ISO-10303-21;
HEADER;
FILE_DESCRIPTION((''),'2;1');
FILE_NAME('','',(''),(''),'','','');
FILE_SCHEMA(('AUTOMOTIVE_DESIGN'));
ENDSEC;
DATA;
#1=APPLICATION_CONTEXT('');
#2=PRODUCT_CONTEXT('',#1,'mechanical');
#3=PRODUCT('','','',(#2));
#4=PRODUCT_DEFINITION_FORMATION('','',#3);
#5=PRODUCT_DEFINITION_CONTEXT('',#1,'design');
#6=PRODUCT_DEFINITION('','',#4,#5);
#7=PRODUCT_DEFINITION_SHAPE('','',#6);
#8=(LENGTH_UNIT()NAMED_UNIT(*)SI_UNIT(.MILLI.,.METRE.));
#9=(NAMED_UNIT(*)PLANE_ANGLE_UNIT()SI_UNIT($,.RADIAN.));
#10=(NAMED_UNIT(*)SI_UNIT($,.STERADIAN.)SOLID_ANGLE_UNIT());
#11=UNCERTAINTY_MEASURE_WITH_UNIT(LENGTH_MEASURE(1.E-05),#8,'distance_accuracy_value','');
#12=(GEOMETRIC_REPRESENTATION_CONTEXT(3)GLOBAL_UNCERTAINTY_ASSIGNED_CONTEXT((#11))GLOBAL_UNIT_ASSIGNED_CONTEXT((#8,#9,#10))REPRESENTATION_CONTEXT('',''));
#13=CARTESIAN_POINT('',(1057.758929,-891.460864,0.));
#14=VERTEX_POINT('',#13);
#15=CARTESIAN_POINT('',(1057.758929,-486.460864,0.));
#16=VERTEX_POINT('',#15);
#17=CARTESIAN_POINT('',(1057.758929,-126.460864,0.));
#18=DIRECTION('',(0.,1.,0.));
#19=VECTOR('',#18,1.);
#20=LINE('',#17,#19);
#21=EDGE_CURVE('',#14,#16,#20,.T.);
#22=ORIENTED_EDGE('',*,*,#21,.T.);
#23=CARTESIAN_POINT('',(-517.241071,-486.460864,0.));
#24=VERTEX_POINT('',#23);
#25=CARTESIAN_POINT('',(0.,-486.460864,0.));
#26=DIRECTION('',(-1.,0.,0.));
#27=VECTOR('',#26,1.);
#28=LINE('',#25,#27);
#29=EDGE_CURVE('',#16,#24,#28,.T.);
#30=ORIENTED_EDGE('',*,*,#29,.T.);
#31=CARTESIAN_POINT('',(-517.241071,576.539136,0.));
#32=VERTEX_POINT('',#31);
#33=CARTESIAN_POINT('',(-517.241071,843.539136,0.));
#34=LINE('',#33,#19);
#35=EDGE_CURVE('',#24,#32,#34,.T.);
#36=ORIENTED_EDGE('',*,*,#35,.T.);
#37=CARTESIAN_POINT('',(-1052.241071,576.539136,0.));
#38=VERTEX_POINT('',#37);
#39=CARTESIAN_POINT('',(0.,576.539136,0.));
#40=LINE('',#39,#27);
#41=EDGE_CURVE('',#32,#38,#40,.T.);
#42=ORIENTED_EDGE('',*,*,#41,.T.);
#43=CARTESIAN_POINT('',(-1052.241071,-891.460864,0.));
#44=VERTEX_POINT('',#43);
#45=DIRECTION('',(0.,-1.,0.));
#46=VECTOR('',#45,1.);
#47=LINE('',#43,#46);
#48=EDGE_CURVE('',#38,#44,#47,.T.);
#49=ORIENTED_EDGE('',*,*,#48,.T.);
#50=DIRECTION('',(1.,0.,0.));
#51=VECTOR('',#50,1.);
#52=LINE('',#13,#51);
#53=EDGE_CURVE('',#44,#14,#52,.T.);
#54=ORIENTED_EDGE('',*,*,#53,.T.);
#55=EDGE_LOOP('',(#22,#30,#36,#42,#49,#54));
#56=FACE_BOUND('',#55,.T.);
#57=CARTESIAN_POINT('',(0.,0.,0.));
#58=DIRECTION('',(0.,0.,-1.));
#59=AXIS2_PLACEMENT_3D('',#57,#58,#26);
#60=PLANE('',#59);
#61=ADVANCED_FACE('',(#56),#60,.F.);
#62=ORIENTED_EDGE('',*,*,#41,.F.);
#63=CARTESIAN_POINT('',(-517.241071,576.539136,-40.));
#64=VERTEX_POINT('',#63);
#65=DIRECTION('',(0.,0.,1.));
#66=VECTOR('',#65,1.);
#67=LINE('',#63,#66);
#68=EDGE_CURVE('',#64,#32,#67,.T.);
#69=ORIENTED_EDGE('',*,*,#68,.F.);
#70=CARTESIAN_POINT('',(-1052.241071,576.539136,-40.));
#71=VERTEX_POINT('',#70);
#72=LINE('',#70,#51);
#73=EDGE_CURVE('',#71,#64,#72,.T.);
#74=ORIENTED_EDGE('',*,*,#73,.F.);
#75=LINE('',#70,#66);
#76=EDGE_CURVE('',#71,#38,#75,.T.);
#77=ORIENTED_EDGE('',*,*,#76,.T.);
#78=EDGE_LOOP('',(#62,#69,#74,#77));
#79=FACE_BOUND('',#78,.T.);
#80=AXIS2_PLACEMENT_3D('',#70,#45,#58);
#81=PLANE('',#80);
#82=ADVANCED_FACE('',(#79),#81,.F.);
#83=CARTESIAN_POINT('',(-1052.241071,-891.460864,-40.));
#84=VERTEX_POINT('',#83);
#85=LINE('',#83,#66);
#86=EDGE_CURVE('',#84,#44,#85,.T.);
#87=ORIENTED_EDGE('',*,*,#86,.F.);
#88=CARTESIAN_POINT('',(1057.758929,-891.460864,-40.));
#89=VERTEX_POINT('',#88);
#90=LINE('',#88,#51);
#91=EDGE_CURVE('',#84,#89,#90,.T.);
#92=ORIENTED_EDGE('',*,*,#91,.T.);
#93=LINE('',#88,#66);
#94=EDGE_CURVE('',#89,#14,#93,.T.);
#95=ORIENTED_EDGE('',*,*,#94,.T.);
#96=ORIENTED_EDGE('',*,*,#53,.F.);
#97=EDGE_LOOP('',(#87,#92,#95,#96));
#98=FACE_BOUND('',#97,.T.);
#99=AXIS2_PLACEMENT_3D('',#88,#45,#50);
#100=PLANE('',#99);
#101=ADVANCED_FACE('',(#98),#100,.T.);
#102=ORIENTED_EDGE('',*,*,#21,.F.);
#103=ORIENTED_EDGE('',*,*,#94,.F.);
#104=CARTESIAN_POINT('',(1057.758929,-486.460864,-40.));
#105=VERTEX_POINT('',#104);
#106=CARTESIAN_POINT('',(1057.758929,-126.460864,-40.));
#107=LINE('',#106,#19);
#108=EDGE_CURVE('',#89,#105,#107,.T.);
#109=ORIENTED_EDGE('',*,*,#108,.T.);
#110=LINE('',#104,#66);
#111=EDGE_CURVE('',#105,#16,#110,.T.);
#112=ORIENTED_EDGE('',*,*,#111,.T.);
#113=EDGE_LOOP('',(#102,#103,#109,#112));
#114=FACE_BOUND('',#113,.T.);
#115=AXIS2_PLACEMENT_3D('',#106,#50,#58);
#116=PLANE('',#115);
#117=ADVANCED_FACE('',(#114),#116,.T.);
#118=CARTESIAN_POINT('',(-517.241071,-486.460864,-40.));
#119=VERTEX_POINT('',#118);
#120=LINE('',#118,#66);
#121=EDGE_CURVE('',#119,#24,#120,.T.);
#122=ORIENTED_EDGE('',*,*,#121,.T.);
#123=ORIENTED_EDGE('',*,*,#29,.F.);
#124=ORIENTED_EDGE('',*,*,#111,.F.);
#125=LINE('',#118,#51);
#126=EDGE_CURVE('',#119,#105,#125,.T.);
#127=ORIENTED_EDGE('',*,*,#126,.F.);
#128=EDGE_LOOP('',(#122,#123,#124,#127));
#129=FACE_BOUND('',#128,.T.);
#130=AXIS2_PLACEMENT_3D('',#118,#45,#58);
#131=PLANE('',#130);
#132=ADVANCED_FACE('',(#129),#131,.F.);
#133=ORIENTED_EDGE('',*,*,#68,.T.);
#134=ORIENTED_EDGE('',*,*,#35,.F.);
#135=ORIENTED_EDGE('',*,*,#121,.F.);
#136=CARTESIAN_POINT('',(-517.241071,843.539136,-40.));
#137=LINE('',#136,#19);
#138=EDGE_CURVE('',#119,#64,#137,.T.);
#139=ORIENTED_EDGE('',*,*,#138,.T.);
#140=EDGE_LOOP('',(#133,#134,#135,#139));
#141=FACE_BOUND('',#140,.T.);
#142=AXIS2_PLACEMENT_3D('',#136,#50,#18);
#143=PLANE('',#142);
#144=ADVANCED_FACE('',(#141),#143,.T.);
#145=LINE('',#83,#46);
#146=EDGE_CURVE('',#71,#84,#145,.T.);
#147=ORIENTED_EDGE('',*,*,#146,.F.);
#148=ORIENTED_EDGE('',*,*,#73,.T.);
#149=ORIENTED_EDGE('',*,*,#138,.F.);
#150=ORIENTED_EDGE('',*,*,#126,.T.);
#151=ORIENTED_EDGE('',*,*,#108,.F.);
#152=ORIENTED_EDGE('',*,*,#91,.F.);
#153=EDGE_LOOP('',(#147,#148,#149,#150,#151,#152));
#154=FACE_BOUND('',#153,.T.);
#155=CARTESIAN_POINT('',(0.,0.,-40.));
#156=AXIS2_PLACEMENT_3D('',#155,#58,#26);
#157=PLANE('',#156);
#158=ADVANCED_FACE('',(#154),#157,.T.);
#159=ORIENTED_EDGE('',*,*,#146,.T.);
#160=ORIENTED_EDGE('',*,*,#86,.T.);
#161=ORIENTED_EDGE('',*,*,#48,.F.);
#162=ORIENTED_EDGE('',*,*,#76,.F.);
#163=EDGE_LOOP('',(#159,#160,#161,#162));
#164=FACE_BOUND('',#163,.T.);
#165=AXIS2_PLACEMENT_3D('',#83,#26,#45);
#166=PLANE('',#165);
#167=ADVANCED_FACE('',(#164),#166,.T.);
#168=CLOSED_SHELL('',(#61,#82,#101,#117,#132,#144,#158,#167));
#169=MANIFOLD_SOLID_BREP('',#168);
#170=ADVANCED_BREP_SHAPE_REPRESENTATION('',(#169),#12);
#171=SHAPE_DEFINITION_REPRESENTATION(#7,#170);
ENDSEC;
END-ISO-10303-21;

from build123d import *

# Parameters (mm, degrees)
TABAN_FLAN_1_DEPTH         = 40
KES_EKSTR_ZYON1_DEPTH      = 1384.891767514
KES_EKSTR_ZYON1_DEPTH_BACK = 1384.891767514
IZIM2_W                    = 535
IZIM2_H                    = 265
KES_EKSTR_ZYON2_DEPTH      = 1384.891767514
KES_EKSTR_ZYON2_DEPTH_BACK = 1384.891767514
IZIM3_W                    = 1575
IZIM3_H                    = 360
KES_EKSTR_ZYON3_DEPTH      = 1384.891767514
KES_EKSTR_ZYON3_DEPTH_BACK = 1384.891767514
IZIM5_W                    = 535
IZIM5_H                    = 2


# Sheet-metal steps are written as plain solids
with BuildPart() as part:
    # Çizim1 → Taban-Flanş1 (new body)
    with BuildSketch(Plane.XY):
        Polygon((-517.241071282, 843.539135514), (-517.241071282, -126.460864486), (1057.758928718, -126.460864486), (1057.758928718, -891.460864486), (-1052.241071282, -891.460864486), (-1052.241071282, 843.539135514), align=None)
    extrude(amount=-TABAN_FLAN_1_DEPTH)

    # Çizim2 → Kes-Ekstrüzyon1 (cut, two sides: drawn at the far end of the back side and taken through both)
    with BuildSketch(Plane.XY.offset(-KES_EKSTR_ZYON1_DEPTH_BACK)):
        with Locations((-784.741071282, 711.039135514)):
            Rectangle(IZIM2_W, IZIM2_H)
    extrude(amount=KES_EKSTR_ZYON1_DEPTH + KES_EKSTR_ZYON1_DEPTH_BACK, mode=Mode.SUBTRACT)

    # Çizim3 → Kes-Ekstrüzyon2 (cut, two sides: drawn at the far end of the back side and taken through both)
    with BuildSketch(Plane.XY.offset(-KES_EKSTR_ZYON2_DEPTH_BACK)):
        with Locations((270.258928718, -306.460864486)):
            Rectangle(IZIM3_W, IZIM3_H)
    extrude(amount=KES_EKSTR_ZYON2_DEPTH + KES_EKSTR_ZYON2_DEPTH_BACK, mode=Mode.SUBTRACT)

    # Çizim5 → Kes-Ekstrüzyon3 (cut, two sides: drawn at the far end of the back side and taken through both)
    with BuildSketch(Plane.XY.offset(-KES_EKSTR_ZYON3_DEPTH_BACK)):
        with Locations((-784.741071282, 577.539135514)):
            Rectangle(IZIM5_W, IZIM5_H)
    extrude(amount=KES_EKSTR_ZYON3_DEPTH + KES_EKSTR_ZYON3_DEPTH_BACK, mode=Mode.SUBTRACT)


solid = part.part
